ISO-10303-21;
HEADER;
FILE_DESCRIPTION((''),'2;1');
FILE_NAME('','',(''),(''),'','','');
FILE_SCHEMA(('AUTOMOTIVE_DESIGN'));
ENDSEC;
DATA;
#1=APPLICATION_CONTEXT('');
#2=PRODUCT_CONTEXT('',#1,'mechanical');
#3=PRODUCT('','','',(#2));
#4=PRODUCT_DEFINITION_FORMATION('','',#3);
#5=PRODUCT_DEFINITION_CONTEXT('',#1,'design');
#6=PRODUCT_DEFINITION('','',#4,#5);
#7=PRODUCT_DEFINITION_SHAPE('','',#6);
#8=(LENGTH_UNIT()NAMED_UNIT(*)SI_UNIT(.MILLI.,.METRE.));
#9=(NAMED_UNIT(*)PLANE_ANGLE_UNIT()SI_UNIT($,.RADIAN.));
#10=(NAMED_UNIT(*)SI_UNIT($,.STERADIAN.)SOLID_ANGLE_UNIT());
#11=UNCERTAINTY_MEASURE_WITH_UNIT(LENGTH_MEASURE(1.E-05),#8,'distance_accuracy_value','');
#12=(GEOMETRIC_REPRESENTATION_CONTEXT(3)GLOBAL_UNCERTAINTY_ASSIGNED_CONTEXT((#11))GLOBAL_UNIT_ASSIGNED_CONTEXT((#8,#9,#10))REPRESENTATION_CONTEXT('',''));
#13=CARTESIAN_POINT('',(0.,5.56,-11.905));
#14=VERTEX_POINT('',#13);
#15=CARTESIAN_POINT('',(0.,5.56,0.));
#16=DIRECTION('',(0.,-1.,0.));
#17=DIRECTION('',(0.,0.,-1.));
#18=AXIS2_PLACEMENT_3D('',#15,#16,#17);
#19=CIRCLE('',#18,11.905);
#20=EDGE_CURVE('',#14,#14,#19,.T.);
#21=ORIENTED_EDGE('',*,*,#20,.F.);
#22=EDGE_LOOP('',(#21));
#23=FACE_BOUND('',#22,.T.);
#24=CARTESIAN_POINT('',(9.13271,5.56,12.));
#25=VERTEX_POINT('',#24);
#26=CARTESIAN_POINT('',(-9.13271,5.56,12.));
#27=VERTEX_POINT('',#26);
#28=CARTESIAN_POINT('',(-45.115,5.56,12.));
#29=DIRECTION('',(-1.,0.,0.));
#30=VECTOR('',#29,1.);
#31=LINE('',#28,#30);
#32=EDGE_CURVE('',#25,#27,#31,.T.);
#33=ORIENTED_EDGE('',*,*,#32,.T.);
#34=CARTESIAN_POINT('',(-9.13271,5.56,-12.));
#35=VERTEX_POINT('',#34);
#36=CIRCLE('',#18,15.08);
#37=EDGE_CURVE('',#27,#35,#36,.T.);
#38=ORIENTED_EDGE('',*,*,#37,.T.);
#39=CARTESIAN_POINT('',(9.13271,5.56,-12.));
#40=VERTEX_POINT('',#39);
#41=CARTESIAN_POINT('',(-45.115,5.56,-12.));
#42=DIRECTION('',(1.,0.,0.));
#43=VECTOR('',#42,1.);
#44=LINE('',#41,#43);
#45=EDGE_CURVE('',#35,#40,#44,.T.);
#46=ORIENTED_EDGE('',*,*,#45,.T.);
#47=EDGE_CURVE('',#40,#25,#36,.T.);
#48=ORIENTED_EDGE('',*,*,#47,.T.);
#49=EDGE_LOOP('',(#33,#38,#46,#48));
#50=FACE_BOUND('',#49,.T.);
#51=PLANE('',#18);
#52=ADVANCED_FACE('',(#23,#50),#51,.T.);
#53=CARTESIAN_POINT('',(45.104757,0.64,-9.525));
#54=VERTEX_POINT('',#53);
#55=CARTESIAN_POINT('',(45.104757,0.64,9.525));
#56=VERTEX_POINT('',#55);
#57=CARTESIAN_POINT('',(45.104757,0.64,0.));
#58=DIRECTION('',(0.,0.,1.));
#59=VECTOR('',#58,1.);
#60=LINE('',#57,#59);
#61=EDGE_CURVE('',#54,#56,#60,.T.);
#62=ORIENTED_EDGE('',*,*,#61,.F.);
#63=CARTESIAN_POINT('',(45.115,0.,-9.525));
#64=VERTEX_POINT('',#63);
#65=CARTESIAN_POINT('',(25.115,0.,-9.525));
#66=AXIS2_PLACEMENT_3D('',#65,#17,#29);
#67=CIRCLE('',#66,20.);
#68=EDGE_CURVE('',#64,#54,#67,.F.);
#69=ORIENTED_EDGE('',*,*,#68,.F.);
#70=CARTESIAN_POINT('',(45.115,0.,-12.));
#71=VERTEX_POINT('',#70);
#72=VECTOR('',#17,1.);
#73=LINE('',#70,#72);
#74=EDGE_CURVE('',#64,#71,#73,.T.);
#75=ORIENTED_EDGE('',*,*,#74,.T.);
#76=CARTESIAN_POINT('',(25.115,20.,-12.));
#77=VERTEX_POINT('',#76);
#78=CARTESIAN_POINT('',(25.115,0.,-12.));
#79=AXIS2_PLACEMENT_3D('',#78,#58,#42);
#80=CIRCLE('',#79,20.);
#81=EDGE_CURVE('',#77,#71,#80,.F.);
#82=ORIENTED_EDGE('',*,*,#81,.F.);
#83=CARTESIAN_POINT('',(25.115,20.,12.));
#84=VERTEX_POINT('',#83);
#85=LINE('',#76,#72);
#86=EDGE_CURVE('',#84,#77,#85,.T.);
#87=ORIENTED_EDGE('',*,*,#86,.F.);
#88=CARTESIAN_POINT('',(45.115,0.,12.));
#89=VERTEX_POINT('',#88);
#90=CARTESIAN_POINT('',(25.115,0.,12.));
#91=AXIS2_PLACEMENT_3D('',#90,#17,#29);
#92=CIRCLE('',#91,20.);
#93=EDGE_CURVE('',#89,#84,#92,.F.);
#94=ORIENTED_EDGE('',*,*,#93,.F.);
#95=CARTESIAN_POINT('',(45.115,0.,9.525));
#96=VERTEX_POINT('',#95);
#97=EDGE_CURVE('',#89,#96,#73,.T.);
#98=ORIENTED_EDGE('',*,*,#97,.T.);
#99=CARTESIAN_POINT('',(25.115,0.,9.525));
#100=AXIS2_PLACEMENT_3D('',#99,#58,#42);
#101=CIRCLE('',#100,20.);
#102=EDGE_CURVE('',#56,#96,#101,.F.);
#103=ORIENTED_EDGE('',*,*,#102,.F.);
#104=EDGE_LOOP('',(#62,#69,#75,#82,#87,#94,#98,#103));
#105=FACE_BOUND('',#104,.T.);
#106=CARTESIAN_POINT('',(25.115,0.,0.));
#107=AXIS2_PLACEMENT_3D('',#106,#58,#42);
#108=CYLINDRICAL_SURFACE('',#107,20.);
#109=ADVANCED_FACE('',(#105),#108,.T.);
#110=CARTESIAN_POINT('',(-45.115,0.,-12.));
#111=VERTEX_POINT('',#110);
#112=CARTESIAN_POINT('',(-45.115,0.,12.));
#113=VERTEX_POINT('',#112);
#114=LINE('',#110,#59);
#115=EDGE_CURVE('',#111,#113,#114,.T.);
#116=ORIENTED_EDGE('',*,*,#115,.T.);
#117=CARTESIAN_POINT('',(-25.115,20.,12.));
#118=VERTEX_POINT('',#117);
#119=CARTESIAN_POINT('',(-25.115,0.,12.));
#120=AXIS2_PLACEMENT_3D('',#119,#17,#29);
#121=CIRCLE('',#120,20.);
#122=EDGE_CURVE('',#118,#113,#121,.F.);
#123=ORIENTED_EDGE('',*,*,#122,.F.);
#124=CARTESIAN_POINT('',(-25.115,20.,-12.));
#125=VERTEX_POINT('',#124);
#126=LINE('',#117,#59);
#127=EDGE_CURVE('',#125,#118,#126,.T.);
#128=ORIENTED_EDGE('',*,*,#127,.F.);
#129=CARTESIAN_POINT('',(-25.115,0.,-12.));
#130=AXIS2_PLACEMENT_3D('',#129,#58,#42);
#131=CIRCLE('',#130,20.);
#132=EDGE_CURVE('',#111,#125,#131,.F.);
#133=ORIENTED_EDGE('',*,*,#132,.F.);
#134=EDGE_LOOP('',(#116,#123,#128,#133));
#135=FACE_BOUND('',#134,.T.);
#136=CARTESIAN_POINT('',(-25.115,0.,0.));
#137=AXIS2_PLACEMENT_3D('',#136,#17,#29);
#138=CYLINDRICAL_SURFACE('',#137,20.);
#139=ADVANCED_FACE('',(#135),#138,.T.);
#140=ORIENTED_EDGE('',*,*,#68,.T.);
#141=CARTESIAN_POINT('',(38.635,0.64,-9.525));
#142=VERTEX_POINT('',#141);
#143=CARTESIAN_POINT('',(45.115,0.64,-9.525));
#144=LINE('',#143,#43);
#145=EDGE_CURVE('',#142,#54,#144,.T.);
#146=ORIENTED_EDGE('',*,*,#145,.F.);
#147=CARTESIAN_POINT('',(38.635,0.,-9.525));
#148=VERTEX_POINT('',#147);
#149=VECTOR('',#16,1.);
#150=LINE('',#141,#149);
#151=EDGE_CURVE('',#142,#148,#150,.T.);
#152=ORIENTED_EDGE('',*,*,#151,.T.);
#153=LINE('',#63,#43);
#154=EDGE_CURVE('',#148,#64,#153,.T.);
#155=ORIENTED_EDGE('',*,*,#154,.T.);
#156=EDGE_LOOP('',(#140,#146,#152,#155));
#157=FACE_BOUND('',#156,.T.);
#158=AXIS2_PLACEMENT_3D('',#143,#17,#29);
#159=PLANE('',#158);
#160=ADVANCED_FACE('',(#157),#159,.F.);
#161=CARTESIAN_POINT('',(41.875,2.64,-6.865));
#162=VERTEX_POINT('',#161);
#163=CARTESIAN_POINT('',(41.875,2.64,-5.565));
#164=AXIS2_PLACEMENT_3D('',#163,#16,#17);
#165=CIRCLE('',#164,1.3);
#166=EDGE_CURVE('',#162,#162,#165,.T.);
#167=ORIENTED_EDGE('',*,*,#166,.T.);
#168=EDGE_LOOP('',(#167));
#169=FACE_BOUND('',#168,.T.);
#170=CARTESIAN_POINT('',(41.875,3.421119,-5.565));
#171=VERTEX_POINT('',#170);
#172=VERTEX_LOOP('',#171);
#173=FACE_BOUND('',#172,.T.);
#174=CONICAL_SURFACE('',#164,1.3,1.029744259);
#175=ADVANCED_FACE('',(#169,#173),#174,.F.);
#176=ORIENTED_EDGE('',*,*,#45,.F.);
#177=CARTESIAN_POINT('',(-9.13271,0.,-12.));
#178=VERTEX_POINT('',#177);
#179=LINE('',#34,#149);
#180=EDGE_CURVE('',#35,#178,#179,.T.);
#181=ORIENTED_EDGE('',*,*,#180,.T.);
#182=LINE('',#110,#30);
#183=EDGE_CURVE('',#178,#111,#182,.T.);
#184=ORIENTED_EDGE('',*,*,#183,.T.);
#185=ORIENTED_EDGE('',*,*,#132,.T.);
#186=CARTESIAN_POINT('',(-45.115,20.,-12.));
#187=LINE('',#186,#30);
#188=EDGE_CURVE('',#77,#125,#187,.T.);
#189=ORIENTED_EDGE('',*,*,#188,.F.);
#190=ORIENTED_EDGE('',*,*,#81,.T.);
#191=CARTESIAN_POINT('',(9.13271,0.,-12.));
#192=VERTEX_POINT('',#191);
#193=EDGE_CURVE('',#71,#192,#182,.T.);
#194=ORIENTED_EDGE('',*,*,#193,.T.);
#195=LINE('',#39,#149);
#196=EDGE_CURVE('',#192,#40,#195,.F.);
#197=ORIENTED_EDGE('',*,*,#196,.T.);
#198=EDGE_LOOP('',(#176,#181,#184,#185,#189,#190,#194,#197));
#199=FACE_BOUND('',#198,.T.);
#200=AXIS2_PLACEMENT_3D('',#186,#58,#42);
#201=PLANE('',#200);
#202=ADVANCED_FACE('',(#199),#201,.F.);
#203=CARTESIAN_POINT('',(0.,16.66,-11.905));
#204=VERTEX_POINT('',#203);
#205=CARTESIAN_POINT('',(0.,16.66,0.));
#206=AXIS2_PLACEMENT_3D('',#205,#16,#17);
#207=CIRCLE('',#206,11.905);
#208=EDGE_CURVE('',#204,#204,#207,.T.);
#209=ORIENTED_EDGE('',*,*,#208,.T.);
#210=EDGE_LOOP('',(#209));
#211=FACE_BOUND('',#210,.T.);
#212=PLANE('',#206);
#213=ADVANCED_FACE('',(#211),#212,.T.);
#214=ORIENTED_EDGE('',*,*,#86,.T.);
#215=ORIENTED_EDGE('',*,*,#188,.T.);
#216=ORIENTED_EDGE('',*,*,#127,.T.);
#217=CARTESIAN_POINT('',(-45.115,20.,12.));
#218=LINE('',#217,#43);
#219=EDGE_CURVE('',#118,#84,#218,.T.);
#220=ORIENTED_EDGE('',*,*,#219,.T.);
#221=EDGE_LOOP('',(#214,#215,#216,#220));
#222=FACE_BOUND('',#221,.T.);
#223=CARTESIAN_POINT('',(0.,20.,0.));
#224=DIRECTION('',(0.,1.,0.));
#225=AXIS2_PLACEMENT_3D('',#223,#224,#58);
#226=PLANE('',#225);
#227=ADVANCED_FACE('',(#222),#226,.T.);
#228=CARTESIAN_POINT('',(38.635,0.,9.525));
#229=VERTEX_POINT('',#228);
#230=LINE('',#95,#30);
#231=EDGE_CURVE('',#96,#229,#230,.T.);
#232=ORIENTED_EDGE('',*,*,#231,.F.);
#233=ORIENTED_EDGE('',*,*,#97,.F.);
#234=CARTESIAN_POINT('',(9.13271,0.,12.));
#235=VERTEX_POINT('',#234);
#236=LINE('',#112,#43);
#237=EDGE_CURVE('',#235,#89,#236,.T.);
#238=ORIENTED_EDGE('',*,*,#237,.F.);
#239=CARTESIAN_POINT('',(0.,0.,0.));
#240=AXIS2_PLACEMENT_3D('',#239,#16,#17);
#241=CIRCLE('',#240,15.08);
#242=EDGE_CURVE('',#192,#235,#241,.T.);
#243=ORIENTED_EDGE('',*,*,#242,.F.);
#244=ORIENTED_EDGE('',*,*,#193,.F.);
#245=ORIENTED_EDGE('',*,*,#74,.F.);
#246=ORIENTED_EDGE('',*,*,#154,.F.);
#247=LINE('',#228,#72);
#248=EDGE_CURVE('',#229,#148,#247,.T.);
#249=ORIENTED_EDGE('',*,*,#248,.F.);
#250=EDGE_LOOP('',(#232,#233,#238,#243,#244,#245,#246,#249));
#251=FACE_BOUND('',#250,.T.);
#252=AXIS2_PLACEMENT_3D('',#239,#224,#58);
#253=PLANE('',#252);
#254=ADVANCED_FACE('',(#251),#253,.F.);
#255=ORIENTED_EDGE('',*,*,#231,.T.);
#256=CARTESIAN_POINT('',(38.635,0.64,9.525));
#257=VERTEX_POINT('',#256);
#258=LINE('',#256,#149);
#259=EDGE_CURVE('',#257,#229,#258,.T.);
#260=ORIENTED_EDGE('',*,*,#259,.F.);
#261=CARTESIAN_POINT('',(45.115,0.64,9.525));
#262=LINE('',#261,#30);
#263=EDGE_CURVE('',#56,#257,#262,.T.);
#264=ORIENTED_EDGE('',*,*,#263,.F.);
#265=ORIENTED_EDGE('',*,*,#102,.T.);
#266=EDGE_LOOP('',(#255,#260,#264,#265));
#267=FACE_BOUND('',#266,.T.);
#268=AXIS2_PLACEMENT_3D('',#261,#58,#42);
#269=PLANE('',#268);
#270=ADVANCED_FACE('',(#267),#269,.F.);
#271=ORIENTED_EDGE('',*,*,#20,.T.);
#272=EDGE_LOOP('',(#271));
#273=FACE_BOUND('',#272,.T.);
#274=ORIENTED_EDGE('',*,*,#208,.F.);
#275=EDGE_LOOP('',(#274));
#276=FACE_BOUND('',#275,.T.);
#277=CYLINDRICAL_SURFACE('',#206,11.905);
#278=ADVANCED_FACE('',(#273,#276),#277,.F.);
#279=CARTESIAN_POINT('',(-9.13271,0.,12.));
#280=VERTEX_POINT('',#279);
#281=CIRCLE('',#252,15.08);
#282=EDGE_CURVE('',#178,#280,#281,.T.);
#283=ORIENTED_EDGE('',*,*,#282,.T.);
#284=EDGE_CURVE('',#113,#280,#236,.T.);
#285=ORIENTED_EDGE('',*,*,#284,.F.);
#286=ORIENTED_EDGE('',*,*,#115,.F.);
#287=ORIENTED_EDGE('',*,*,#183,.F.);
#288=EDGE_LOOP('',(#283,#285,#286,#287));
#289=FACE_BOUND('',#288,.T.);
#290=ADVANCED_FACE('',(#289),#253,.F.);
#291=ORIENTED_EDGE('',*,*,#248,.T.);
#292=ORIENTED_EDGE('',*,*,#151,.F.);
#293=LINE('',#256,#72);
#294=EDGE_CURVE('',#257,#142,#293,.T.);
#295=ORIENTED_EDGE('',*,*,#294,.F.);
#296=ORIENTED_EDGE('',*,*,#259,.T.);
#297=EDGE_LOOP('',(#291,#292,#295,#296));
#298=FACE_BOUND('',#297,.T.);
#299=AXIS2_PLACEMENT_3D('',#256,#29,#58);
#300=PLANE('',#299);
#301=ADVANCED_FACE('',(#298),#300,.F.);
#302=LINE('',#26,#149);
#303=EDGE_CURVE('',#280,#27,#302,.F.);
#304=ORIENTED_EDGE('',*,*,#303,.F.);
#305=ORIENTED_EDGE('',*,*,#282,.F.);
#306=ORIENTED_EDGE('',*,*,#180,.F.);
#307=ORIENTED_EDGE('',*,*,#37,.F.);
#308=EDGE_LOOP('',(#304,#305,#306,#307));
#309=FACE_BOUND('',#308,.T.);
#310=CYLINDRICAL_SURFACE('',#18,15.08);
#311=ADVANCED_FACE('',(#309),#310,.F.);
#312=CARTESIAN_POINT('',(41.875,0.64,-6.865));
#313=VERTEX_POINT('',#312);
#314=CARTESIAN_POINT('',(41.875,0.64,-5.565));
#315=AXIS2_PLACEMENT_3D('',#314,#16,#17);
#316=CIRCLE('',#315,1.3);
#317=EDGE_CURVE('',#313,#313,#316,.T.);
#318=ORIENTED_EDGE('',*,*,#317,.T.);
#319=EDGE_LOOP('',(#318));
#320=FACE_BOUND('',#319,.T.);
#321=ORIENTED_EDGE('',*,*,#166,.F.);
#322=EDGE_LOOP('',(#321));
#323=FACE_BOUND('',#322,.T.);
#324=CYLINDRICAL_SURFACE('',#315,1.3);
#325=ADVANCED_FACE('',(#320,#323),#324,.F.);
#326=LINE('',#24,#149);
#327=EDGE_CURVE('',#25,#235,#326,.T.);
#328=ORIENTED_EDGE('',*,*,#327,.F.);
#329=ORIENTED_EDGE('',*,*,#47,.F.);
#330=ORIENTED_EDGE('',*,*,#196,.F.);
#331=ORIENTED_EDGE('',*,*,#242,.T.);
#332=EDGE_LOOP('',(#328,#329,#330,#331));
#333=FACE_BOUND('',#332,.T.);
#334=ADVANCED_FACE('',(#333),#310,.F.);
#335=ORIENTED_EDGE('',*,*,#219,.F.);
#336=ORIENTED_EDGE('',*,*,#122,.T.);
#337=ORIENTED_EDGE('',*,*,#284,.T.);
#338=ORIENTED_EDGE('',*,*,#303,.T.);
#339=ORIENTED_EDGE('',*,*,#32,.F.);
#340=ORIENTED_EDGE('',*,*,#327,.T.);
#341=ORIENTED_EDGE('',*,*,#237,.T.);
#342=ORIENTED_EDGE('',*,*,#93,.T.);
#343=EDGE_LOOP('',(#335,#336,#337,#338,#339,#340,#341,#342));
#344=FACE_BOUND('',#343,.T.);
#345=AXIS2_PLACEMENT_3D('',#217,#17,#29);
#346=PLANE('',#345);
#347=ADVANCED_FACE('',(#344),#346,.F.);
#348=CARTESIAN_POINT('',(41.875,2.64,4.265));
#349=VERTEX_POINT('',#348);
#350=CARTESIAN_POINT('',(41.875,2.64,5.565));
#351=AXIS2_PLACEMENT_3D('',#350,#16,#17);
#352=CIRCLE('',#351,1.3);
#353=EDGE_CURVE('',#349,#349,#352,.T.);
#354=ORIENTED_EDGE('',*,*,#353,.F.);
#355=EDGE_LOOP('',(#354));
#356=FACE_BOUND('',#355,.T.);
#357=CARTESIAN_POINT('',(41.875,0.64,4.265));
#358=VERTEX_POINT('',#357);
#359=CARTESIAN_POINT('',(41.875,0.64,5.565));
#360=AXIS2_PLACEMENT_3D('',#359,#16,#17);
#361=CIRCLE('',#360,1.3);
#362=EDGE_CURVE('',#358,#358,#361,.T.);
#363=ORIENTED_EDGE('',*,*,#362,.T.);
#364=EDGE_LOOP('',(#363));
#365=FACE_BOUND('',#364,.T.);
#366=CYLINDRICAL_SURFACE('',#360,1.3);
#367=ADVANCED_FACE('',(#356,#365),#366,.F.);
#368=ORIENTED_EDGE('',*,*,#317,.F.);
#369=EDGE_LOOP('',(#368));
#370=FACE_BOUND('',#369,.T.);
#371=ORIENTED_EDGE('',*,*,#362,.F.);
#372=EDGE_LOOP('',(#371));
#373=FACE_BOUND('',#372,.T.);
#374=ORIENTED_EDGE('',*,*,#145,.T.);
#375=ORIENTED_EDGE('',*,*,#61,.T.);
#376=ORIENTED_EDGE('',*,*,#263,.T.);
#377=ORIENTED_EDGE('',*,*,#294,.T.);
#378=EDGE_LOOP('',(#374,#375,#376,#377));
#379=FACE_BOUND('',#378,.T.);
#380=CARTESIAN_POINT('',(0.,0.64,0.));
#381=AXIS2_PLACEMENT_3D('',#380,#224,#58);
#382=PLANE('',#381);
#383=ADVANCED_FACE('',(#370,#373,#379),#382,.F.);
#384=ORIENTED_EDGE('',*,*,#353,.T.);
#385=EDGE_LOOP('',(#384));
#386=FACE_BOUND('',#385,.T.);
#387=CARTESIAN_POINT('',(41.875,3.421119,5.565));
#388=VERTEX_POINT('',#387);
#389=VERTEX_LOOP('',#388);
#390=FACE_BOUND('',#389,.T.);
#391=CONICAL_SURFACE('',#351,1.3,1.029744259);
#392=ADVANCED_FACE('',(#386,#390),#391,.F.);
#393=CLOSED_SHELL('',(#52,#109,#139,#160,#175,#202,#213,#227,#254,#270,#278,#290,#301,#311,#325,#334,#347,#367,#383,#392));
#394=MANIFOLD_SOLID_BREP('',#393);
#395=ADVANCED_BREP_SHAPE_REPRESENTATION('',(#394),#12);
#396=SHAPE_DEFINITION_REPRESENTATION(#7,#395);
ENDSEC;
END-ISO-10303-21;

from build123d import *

# Parameters (mm, degrees)
SKETCH1_W                = 90.23
SKETCH1_H                = 24
BOSS_EXTRUDE1_DEPTH      = 20
FILLET1_R                = 20
SKETCH2_W                = 6.48
SKETCH2_H                = 19.05
CUT_EXTRUDE1_DEPTH       = 0.64
M2_CLEARANCE_HOLE1_D     = 2.6
M2_CLEARANCE_HOLE1_DEPTH = 2
M2_CLEARANCE_HOLE1_TIP   = 0.781118805
SKETCH5_R                = 15.08
CUT_EXTRUDE2_DEPTH       = 5.56
SKETCH6_R                = 11.905
CUT_EXTRUDE3_DEPTH       = 11.1


with BuildPart() as part:
    # Sketch1 → Boss-Extrude1 (new body)
    with BuildSketch(Plane(origin=(0, 0, 0), x_dir=(1, 0, 0), z_dir=(0, 1, 0))):
        Rectangle(SKETCH1_W, SKETCH1_H)
    extrude(amount=BOSS_EXTRUDE1_DEPTH)

    # Fillet1
    fillet1_edges = [part.edges().sort_by_distance(p)[0] for p in [
        (45.115, 20, 0),
        (-45.115, 20, 0),
    ]]
    fillet(fillet1_edges, radius=FILLET1_R - 0.0001)  # a hair under: the kernel refuses the full size

    # Sketch2 → Cut-Extrude1 (cut)
    with BuildSketch(Plane.XZ):
        with Locations((41.875, 0)):
            Rectangle(SKETCH2_W, SKETCH2_H)
    extrude(amount=-CUT_EXTRUDE1_DEPTH, mode=Mode.SUBTRACT)

    # M2 Clearance Hole1
    with Locations(Plane(origin=(0, 0.64, 0), x_dir=(-1, 0, 0), z_dir=(0, -1, 0))):
        with Locations((-41.875, 5.565), (-41.875, -5.565)):
            Hole(M2_CLEARANCE_HOLE1_D / 2, depth=M2_CLEARANCE_HOLE1_DEPTH)
            with Locations((0, 0, -(M2_CLEARANCE_HOLE1_DEPTH + M2_CLEARANCE_HOLE1_TIP / 2))):  # 118° drill point
                Cone(0, M2_CLEARANCE_HOLE1_D / 2, M2_CLEARANCE_HOLE1_TIP, mode=Mode.SUBTRACT)

    # Sketch5 → Cut-Extrude2 (cut)
    with BuildSketch(Plane.XZ):
        Circle(SKETCH5_R)
    extrude(amount=-CUT_EXTRUDE2_DEPTH, mode=Mode.SUBTRACT)

    # Sketch6 → Cut-Extrude3 (cut)
    with BuildSketch(Plane.XZ.offset(-5.56)):
        with Locations(Location((0, 0, 0), (0, 0, 270))):
            Circle(SKETCH6_R)
    extrude(amount=-CUT_EXTRUDE3_DEPTH, mode=Mode.SUBTRACT)


solid = part.part
